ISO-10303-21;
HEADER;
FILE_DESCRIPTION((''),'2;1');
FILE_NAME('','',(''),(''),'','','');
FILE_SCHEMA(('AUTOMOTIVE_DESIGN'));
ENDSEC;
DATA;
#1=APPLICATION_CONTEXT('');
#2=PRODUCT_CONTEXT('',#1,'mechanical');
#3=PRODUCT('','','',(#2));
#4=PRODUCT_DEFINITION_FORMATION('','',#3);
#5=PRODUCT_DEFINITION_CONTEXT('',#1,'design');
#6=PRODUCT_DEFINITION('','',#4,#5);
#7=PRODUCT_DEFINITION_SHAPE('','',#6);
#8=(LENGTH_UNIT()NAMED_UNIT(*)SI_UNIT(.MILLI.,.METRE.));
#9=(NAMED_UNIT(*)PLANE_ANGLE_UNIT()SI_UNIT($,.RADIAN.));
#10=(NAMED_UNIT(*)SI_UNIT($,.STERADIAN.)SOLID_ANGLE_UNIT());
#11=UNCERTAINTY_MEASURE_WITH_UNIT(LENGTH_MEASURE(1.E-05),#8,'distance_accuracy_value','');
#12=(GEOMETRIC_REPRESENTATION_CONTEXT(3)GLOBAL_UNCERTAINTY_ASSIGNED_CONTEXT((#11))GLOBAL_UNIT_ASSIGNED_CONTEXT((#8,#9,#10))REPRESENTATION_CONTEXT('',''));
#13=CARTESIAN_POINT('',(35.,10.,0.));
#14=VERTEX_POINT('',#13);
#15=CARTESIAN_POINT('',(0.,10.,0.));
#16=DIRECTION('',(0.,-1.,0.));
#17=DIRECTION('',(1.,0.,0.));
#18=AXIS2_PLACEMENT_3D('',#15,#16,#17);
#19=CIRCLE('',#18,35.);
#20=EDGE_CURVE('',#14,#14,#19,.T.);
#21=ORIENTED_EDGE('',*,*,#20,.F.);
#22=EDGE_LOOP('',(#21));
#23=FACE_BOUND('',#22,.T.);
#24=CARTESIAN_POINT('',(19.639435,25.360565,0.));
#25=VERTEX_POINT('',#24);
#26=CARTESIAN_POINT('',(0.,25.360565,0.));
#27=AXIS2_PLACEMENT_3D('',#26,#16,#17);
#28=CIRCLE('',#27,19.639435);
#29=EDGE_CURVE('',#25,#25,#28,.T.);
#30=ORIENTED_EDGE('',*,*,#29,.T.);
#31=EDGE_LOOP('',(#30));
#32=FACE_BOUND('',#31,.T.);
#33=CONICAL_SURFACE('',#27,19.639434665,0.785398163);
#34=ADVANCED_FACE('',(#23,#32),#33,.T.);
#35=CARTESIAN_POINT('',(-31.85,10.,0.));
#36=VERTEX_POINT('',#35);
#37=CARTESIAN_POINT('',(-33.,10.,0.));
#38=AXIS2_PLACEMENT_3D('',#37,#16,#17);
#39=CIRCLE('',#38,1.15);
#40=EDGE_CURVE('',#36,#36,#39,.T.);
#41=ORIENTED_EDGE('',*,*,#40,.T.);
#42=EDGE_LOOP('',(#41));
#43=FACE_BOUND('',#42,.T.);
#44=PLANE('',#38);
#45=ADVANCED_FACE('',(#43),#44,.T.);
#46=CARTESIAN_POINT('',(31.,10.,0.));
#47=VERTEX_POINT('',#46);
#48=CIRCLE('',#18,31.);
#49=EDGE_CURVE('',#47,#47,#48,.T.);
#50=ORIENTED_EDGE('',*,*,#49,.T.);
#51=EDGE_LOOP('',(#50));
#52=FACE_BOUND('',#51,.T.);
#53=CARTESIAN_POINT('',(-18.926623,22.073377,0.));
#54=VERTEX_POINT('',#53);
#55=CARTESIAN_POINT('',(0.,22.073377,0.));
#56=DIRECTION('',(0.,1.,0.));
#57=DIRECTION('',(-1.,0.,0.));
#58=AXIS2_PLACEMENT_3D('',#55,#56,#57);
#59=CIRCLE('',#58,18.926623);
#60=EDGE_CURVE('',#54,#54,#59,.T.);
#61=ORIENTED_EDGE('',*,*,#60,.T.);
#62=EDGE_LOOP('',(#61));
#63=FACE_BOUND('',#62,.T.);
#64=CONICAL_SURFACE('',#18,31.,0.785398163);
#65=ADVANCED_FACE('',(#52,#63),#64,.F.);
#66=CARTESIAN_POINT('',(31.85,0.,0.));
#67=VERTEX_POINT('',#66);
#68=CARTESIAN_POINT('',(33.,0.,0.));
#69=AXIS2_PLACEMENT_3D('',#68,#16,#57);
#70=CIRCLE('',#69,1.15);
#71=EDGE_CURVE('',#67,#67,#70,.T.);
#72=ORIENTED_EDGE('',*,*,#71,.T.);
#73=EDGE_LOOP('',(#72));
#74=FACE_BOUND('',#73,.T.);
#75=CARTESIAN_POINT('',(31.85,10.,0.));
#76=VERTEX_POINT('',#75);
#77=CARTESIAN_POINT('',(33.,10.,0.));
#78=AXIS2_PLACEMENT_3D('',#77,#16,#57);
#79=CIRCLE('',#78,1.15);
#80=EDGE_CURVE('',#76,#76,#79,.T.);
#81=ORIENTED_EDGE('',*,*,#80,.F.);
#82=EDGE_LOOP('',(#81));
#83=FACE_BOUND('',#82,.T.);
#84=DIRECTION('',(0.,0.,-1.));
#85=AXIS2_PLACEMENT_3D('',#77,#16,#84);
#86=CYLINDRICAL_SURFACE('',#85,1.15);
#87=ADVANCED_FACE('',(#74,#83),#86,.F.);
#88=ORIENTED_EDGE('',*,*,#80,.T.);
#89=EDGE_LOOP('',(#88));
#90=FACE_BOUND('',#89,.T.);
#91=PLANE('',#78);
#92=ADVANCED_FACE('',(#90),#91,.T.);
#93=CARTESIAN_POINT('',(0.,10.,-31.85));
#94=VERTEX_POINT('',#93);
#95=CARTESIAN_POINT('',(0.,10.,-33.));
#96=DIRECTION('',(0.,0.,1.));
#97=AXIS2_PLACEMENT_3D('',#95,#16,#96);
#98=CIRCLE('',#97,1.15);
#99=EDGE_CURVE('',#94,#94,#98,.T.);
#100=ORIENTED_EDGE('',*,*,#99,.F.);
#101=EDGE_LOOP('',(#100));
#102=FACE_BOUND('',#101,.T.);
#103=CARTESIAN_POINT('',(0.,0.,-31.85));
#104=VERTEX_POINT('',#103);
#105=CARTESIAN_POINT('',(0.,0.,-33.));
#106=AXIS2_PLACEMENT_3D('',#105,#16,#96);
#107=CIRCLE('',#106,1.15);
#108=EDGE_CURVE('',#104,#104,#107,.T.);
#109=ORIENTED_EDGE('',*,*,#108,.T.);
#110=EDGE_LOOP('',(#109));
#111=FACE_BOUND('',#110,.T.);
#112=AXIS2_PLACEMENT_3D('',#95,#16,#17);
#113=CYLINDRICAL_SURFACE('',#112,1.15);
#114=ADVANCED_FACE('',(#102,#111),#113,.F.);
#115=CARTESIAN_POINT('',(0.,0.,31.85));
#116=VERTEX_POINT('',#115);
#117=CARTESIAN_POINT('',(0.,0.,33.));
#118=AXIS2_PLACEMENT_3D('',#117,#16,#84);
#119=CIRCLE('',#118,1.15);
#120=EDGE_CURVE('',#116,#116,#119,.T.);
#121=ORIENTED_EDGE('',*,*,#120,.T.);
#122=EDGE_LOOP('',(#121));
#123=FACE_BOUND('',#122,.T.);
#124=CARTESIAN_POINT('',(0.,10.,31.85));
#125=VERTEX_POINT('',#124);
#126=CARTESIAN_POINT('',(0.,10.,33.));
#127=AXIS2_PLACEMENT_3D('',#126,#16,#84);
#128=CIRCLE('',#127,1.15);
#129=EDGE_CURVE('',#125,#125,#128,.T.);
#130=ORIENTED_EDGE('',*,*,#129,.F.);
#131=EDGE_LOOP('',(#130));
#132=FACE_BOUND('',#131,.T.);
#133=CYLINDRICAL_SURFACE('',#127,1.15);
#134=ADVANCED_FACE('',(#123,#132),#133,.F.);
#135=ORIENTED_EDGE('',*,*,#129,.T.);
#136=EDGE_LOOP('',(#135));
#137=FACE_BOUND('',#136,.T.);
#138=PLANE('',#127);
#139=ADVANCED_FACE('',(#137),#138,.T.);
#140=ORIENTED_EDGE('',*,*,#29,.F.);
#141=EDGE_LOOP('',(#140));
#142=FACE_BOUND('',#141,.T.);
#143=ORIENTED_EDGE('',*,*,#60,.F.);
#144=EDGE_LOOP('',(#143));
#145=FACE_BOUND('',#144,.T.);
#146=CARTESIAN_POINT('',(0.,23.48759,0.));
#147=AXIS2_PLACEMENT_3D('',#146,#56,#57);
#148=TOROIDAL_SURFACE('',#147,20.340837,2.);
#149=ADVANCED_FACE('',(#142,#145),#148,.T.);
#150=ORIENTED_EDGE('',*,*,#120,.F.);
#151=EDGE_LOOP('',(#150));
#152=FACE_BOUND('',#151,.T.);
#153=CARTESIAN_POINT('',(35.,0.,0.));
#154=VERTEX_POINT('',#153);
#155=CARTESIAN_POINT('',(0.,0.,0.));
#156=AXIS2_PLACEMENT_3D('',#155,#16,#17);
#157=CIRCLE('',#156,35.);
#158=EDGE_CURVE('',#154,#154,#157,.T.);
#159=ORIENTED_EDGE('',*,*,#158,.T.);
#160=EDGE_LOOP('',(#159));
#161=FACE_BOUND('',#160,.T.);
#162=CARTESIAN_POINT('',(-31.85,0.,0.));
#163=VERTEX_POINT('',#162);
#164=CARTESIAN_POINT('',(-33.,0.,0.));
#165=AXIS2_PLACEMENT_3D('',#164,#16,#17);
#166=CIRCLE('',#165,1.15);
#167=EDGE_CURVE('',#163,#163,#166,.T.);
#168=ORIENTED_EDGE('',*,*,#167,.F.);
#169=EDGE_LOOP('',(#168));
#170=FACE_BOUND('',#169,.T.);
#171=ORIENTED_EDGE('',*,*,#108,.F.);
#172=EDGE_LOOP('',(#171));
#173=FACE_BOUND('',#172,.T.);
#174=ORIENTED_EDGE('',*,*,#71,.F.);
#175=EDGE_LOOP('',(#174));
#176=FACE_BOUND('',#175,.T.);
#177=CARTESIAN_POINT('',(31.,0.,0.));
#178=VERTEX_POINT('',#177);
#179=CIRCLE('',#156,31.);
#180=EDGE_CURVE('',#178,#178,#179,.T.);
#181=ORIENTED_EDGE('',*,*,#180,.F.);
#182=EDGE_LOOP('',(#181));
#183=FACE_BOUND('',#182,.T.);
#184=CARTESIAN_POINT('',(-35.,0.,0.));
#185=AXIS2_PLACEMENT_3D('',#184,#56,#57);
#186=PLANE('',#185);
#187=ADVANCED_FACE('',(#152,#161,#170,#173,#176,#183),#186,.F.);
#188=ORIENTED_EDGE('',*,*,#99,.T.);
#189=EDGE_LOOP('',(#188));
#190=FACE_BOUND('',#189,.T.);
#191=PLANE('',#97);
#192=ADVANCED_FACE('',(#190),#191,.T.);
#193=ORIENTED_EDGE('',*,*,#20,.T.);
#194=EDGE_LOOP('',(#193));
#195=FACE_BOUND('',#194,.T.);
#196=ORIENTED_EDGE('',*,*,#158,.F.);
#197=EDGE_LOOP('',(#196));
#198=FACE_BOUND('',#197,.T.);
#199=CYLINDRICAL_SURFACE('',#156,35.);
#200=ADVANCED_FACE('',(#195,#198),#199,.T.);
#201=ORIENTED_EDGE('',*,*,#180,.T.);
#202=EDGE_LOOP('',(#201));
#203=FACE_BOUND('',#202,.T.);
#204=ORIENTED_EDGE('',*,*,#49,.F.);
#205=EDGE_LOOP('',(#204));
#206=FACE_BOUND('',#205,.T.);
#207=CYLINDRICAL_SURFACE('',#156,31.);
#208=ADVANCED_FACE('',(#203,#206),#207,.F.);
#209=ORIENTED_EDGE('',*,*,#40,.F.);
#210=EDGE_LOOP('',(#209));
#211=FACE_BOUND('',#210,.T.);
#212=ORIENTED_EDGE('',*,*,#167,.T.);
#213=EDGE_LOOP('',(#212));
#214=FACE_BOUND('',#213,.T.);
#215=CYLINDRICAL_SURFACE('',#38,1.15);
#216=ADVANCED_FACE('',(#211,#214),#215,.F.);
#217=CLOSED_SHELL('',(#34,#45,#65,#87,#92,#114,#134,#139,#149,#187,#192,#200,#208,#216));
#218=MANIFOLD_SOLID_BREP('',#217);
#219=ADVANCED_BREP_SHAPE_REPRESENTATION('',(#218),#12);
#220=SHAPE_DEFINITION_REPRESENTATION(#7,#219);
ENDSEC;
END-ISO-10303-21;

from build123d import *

# Parameters (mm, degrees)
FILLET1_R          = 2
SKETCH3_R          = 1.15
CUT_EXTRUDE1_DEPTH = 10
CIRPATTERN1_COUNT  = 4


with BuildPart() as part:
    # Sketch2 → Revolve1 (revolve)
    with BuildSketch(Plane.XY, mode=Mode.PRIVATE) as revolve1_sk:
        Polygon((-31, 0), (-31, 10), (-15.639434665, 25.360565335), (-19.639434665, 25.360565335), (-35, 10), (-35, 0), align=None)
    revolve(revolve1_sk.sketch.rotate(Axis((0, 0, 0), (0, 1, 0)), 180), axis=Axis((0, 0, 0), (0, 1, 0)))

    # Fillet1
    # the kernel refuses this fillet: 2 mm, written as the material it takes off along each edge
    with BuildSketch(Plane(origin=(0, 25.360565335, 0), x_dir=(1, 0, 0), z_dir=(0, 0, 1))) as fillet1_piece_1:
        with BuildLine():
            CenterArc((20.340836733, -1.872974943), FILLET1_R, 110.530199479, 114.469800521)
            Line((19.639434665, 0), (19.625406624, 0.037459499))
            ThreePointArc((19.625406624, 0.037459499), (17.639434665, 0.04), (15.639434665, 0.04))
            Line((15.639434665, 0.04), (15.611150394, -0.028284271))
            Line((15.611150394, -0.028284271), (18.8983389, -3.315472777))
            Line((18.8983389, -3.315472777), (18.926623171, -3.287188506))
        make_face()
    revolve(axis=Axis((0, 25.360565335, 0), (0, 1, 0)), mode=Mode.SUBTRACT)

    # Sketch3 → Cut-Extrude1 (cut)
    with BuildSketch(Plane.XZ):
        with Locations(Location((0, 33, 0), (0, 0, 270))):
            Circle(SKETCH3_R)
    cut_extrude1 = extrude(amount=-CUT_EXTRUDE1_DEPTH, mode=Mode.SUBTRACT)

    # CirPattern1: Cut-Extrude1 ×4 about axis
    cirpattern1_axis = Axis((0, 0, 0), (0, 1, 0))
    for i in range(1, CIRPATTERN1_COUNT):
        add(cut_extrude1.rotate(cirpattern1_axis, i * 360 / CIRPATTERN1_COUNT), mode=Mode.SUBTRACT)


solid = part.part
